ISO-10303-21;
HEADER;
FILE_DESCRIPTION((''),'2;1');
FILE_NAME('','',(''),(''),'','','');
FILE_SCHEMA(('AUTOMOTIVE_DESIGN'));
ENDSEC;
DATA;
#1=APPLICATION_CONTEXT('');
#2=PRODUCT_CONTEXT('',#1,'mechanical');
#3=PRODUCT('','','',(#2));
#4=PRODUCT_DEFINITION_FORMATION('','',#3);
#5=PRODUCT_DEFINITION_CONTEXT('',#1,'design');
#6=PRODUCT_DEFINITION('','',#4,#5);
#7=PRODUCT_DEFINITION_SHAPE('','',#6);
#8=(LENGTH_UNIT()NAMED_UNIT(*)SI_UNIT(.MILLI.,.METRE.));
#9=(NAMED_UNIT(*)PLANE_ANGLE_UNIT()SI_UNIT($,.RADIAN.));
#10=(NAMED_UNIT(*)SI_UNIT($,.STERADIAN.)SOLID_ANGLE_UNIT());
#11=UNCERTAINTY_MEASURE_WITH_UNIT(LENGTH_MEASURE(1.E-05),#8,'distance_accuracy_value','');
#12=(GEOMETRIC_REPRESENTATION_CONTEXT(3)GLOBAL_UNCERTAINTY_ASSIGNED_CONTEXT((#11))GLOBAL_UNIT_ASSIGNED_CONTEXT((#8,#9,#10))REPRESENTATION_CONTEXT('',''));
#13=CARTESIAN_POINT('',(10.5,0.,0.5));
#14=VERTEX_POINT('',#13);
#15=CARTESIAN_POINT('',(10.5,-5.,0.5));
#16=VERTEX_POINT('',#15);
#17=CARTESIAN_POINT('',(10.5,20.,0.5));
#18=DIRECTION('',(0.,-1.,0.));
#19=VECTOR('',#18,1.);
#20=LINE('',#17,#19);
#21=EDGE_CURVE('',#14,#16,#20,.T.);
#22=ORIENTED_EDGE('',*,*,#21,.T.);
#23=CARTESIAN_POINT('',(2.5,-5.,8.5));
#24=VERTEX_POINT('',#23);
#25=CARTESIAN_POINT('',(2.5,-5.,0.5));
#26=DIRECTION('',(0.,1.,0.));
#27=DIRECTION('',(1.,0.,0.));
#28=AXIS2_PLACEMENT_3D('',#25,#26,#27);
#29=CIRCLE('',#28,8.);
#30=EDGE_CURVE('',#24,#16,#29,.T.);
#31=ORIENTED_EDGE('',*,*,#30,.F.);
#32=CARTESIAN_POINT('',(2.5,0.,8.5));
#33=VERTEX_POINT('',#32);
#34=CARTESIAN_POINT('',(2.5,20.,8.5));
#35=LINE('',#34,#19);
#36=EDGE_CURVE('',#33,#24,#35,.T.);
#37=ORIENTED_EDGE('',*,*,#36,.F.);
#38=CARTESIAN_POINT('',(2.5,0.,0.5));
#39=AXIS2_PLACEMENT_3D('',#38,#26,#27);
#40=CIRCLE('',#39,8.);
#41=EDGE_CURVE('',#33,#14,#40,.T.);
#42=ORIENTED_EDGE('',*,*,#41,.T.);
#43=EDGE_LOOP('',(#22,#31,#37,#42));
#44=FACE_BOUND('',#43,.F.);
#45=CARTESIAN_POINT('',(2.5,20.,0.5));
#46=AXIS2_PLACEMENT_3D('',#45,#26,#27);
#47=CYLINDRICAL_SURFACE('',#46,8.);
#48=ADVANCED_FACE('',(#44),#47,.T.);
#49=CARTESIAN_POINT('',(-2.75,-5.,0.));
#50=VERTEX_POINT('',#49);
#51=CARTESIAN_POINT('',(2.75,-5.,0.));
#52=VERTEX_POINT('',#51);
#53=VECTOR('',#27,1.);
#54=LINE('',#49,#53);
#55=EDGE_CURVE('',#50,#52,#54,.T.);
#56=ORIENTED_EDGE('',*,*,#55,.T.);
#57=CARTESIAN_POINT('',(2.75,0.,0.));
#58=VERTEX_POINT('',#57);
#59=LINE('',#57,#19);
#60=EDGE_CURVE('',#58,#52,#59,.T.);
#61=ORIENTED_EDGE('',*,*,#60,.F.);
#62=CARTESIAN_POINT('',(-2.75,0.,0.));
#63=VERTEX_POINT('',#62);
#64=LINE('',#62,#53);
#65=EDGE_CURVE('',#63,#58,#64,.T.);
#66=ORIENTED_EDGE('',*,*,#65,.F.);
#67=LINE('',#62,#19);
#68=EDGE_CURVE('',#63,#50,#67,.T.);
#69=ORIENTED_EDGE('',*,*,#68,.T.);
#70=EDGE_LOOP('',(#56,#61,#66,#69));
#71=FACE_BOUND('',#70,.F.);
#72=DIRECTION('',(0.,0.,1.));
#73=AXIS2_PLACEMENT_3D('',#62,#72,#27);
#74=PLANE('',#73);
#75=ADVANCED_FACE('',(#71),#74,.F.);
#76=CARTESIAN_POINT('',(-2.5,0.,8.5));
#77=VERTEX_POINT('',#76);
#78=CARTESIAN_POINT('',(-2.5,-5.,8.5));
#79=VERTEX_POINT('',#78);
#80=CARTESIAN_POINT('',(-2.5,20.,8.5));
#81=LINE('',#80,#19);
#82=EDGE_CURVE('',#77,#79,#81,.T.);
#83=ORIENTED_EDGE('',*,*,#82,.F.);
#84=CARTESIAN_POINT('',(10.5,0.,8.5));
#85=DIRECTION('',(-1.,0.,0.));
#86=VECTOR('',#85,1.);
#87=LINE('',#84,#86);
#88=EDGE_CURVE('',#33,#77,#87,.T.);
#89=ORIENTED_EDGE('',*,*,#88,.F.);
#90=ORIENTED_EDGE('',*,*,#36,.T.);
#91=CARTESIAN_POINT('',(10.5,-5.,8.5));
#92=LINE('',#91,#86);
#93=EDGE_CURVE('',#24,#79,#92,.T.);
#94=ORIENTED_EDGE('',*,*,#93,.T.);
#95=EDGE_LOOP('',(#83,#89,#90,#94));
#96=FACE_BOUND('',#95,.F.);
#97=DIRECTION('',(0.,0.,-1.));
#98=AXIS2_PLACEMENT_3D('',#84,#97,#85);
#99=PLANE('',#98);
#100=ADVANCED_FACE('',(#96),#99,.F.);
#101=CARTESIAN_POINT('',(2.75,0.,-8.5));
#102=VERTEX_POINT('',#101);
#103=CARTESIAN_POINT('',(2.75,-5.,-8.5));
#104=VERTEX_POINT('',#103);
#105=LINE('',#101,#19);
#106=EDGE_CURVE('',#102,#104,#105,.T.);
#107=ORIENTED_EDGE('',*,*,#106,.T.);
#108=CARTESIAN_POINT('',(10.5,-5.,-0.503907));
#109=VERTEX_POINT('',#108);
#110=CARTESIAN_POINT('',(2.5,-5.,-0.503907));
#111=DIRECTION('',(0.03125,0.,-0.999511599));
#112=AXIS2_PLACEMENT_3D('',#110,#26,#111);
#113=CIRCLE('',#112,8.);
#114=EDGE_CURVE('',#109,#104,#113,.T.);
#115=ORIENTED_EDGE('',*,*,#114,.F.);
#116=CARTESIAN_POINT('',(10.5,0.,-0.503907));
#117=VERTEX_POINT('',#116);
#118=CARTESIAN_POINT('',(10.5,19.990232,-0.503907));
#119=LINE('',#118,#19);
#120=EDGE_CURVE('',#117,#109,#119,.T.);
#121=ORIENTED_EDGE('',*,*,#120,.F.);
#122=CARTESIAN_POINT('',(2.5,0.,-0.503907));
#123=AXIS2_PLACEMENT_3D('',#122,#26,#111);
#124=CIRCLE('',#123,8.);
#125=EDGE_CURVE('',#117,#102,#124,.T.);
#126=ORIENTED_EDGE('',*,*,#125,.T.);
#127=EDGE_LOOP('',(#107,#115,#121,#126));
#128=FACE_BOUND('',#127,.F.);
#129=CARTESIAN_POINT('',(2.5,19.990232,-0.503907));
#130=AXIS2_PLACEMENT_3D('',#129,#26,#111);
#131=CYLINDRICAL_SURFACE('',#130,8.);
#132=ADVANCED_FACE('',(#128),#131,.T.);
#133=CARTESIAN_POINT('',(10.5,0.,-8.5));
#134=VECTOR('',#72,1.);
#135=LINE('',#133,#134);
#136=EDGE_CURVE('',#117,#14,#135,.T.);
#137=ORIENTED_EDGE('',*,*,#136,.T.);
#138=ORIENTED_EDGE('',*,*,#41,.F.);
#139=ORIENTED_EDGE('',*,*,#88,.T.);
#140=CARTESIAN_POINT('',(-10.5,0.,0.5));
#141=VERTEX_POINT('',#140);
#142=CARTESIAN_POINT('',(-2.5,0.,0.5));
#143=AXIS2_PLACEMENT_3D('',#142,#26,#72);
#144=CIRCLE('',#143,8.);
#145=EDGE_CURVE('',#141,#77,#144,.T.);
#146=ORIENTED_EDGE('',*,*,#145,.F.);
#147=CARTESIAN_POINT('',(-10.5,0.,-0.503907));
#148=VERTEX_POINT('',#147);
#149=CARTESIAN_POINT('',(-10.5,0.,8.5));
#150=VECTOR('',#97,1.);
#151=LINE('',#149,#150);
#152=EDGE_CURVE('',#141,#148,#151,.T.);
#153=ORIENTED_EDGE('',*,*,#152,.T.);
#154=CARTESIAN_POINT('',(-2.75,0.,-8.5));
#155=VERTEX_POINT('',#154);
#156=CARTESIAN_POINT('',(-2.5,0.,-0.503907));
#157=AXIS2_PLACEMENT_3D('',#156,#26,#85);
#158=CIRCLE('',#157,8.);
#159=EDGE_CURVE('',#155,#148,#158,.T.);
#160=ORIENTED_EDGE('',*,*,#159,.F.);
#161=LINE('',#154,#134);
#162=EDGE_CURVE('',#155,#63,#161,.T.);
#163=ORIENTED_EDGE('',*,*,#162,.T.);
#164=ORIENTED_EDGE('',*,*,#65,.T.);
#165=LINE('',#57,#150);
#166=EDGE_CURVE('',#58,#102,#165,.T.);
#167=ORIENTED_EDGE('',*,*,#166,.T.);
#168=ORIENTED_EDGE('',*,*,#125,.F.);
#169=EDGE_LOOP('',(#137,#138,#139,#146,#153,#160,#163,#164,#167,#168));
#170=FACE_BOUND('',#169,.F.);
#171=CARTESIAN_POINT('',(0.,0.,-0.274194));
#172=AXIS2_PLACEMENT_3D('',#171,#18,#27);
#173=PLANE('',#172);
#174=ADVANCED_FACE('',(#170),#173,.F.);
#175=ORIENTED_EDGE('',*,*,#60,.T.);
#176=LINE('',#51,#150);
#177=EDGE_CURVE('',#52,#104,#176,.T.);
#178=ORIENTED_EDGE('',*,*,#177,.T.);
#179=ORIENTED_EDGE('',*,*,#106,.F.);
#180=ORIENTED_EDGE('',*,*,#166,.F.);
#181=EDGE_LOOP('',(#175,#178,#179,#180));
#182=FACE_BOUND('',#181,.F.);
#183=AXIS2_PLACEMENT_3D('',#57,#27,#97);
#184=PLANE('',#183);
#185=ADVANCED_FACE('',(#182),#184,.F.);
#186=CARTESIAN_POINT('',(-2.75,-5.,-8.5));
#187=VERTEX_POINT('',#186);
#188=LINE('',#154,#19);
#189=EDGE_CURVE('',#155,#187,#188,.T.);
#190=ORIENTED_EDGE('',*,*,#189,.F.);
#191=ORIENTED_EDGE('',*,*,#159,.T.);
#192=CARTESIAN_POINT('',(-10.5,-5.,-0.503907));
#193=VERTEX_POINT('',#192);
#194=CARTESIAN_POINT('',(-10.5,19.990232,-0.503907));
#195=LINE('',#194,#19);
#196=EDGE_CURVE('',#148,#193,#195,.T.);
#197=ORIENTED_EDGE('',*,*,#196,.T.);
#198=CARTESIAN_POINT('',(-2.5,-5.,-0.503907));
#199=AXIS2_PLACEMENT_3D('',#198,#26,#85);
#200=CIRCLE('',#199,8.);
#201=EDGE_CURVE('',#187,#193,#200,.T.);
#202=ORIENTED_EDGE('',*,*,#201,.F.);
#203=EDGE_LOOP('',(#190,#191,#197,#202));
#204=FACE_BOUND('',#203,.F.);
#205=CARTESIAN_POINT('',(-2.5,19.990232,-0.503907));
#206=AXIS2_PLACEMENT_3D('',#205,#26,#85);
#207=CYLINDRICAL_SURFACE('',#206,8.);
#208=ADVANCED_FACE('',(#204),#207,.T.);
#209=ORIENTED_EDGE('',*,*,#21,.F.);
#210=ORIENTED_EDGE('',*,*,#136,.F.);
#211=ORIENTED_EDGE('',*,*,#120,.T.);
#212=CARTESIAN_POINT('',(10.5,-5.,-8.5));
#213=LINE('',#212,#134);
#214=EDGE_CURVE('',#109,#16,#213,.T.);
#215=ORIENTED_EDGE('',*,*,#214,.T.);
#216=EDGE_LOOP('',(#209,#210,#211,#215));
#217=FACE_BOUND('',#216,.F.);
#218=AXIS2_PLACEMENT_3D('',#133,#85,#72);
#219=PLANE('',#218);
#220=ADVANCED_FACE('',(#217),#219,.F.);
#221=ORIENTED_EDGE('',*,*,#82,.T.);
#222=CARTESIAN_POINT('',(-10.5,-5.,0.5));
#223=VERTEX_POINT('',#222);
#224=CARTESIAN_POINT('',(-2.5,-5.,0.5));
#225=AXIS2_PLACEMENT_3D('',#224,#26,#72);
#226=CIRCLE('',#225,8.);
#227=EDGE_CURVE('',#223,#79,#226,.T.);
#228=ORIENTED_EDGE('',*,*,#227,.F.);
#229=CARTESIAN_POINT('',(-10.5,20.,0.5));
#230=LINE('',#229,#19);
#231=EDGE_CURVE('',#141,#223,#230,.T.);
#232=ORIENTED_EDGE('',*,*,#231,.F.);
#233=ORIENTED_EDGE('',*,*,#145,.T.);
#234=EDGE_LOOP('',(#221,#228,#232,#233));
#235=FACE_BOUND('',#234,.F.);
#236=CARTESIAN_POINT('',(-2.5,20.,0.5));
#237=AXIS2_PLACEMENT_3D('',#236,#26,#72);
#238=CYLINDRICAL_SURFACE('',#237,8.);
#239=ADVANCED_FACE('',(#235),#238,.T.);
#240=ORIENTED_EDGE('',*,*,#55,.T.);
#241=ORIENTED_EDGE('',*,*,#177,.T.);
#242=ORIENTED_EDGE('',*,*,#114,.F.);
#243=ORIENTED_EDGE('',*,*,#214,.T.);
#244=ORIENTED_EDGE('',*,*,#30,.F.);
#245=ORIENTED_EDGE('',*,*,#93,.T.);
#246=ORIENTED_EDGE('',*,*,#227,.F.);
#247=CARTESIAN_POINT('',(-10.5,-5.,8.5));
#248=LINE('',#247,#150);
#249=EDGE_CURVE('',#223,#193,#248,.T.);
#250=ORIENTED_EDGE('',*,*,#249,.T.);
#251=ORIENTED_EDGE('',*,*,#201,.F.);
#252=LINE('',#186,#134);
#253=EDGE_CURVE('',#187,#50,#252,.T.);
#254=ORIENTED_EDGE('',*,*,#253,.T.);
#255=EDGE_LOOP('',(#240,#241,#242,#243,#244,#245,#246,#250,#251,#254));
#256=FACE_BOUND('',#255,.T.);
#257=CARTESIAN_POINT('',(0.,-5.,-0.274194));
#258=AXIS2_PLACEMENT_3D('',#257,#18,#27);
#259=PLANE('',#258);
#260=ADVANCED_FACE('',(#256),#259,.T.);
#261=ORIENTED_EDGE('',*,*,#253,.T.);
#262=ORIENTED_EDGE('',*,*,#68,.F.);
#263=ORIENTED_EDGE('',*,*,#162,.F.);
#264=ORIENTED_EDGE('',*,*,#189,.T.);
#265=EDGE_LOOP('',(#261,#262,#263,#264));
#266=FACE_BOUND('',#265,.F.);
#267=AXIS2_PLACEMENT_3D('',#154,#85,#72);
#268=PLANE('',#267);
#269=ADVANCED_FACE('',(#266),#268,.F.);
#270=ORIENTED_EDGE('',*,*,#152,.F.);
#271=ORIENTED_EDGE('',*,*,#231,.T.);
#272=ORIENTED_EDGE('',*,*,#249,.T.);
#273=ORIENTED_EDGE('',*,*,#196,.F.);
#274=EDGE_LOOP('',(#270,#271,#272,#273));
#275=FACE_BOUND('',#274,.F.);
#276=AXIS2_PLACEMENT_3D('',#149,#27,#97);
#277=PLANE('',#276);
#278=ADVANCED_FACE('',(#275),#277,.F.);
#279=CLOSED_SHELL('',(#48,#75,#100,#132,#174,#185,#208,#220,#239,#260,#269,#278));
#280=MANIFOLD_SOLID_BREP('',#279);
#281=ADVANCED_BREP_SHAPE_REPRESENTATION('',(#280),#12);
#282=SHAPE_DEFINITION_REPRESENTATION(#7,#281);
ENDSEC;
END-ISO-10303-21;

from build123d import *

# Parameters (mm, degrees)
F1_DEPTH    = 5
F2_T1_DEPTH = 45
F2_T3_DEPTH = 44.9804639793


# Not quite as in the source:
# - a fillet or chamfer that OpenCascade refuses, or shapes differently, is made with other operations: its cross-section is extruded or revolved along the edge and cut away or added


with BuildPart() as f1:
    # F0 (on Front) → F1 (new body)
    with BuildSketch(Plane.XZ):
        Polygon((2.75, -8.5), (10.5, -8.5), (10.5, 8.5), (-10.5, 8.5), (-10.5, -8.5), (-2.75, -8.5), (-2.75, 0), (2.75, 0), align=None)
    extrude(amount=F1_DEPTH)

    # F2: fillet of radius 8 on 4 edges, made by hand

    # F2_s2 → F2_t1 (cut)
    with BuildSketch(Plane.XZ.offset(-20)):
        with BuildLine():
            ThreePointArc((-2.5, 8.5), (-8.1568542495, 6.1568542495), (-10.5, 0.5))
            Line((-10.5, 0.5), (-10.5, 8.5))
            Line((-10.5, 8.5), (-2.5, 8.5))
        make_face()
        with BuildLine():
            ThreePointArc((10.5, 0.5), (8.1568542495, 6.1568542495), (2.5, 8.5))
            Line((2.5, 8.5), (10.5, 8.5))
            Line((10.5, 8.5), (10.5, 0.5))
        make_face()
    extrude(amount=F2_T1_DEPTH, mode=Mode.SUBTRACT)

    # F2_s4 → F2_t3 (cut)
    with BuildSketch(Plane.XZ.offset(-19.9902319896)):
        with BuildLine():
            ThreePointArc((2.75, -8.5), (8.2445626465, -6.071671567), (10.5, -0.5039072041))
            Line((10.5, -0.5039072041), (10.5, -8.5))
            Line((10.5, -8.5), (2.75, -8.5))
        make_face()
        with BuildLine():
            ThreePointArc((-10.5, -0.5039072041), (-8.2445626465, -6.071671567), (-2.75, -8.5))
            Line((-2.75, -8.5), (-10.5, -8.5))
            Line((-10.5, -8.5), (-10.5, -0.5039072041))
        make_face()
    extrude(amount=F2_T3_DEPTH, mode=Mode.SUBTRACT)


solid = f1.part
